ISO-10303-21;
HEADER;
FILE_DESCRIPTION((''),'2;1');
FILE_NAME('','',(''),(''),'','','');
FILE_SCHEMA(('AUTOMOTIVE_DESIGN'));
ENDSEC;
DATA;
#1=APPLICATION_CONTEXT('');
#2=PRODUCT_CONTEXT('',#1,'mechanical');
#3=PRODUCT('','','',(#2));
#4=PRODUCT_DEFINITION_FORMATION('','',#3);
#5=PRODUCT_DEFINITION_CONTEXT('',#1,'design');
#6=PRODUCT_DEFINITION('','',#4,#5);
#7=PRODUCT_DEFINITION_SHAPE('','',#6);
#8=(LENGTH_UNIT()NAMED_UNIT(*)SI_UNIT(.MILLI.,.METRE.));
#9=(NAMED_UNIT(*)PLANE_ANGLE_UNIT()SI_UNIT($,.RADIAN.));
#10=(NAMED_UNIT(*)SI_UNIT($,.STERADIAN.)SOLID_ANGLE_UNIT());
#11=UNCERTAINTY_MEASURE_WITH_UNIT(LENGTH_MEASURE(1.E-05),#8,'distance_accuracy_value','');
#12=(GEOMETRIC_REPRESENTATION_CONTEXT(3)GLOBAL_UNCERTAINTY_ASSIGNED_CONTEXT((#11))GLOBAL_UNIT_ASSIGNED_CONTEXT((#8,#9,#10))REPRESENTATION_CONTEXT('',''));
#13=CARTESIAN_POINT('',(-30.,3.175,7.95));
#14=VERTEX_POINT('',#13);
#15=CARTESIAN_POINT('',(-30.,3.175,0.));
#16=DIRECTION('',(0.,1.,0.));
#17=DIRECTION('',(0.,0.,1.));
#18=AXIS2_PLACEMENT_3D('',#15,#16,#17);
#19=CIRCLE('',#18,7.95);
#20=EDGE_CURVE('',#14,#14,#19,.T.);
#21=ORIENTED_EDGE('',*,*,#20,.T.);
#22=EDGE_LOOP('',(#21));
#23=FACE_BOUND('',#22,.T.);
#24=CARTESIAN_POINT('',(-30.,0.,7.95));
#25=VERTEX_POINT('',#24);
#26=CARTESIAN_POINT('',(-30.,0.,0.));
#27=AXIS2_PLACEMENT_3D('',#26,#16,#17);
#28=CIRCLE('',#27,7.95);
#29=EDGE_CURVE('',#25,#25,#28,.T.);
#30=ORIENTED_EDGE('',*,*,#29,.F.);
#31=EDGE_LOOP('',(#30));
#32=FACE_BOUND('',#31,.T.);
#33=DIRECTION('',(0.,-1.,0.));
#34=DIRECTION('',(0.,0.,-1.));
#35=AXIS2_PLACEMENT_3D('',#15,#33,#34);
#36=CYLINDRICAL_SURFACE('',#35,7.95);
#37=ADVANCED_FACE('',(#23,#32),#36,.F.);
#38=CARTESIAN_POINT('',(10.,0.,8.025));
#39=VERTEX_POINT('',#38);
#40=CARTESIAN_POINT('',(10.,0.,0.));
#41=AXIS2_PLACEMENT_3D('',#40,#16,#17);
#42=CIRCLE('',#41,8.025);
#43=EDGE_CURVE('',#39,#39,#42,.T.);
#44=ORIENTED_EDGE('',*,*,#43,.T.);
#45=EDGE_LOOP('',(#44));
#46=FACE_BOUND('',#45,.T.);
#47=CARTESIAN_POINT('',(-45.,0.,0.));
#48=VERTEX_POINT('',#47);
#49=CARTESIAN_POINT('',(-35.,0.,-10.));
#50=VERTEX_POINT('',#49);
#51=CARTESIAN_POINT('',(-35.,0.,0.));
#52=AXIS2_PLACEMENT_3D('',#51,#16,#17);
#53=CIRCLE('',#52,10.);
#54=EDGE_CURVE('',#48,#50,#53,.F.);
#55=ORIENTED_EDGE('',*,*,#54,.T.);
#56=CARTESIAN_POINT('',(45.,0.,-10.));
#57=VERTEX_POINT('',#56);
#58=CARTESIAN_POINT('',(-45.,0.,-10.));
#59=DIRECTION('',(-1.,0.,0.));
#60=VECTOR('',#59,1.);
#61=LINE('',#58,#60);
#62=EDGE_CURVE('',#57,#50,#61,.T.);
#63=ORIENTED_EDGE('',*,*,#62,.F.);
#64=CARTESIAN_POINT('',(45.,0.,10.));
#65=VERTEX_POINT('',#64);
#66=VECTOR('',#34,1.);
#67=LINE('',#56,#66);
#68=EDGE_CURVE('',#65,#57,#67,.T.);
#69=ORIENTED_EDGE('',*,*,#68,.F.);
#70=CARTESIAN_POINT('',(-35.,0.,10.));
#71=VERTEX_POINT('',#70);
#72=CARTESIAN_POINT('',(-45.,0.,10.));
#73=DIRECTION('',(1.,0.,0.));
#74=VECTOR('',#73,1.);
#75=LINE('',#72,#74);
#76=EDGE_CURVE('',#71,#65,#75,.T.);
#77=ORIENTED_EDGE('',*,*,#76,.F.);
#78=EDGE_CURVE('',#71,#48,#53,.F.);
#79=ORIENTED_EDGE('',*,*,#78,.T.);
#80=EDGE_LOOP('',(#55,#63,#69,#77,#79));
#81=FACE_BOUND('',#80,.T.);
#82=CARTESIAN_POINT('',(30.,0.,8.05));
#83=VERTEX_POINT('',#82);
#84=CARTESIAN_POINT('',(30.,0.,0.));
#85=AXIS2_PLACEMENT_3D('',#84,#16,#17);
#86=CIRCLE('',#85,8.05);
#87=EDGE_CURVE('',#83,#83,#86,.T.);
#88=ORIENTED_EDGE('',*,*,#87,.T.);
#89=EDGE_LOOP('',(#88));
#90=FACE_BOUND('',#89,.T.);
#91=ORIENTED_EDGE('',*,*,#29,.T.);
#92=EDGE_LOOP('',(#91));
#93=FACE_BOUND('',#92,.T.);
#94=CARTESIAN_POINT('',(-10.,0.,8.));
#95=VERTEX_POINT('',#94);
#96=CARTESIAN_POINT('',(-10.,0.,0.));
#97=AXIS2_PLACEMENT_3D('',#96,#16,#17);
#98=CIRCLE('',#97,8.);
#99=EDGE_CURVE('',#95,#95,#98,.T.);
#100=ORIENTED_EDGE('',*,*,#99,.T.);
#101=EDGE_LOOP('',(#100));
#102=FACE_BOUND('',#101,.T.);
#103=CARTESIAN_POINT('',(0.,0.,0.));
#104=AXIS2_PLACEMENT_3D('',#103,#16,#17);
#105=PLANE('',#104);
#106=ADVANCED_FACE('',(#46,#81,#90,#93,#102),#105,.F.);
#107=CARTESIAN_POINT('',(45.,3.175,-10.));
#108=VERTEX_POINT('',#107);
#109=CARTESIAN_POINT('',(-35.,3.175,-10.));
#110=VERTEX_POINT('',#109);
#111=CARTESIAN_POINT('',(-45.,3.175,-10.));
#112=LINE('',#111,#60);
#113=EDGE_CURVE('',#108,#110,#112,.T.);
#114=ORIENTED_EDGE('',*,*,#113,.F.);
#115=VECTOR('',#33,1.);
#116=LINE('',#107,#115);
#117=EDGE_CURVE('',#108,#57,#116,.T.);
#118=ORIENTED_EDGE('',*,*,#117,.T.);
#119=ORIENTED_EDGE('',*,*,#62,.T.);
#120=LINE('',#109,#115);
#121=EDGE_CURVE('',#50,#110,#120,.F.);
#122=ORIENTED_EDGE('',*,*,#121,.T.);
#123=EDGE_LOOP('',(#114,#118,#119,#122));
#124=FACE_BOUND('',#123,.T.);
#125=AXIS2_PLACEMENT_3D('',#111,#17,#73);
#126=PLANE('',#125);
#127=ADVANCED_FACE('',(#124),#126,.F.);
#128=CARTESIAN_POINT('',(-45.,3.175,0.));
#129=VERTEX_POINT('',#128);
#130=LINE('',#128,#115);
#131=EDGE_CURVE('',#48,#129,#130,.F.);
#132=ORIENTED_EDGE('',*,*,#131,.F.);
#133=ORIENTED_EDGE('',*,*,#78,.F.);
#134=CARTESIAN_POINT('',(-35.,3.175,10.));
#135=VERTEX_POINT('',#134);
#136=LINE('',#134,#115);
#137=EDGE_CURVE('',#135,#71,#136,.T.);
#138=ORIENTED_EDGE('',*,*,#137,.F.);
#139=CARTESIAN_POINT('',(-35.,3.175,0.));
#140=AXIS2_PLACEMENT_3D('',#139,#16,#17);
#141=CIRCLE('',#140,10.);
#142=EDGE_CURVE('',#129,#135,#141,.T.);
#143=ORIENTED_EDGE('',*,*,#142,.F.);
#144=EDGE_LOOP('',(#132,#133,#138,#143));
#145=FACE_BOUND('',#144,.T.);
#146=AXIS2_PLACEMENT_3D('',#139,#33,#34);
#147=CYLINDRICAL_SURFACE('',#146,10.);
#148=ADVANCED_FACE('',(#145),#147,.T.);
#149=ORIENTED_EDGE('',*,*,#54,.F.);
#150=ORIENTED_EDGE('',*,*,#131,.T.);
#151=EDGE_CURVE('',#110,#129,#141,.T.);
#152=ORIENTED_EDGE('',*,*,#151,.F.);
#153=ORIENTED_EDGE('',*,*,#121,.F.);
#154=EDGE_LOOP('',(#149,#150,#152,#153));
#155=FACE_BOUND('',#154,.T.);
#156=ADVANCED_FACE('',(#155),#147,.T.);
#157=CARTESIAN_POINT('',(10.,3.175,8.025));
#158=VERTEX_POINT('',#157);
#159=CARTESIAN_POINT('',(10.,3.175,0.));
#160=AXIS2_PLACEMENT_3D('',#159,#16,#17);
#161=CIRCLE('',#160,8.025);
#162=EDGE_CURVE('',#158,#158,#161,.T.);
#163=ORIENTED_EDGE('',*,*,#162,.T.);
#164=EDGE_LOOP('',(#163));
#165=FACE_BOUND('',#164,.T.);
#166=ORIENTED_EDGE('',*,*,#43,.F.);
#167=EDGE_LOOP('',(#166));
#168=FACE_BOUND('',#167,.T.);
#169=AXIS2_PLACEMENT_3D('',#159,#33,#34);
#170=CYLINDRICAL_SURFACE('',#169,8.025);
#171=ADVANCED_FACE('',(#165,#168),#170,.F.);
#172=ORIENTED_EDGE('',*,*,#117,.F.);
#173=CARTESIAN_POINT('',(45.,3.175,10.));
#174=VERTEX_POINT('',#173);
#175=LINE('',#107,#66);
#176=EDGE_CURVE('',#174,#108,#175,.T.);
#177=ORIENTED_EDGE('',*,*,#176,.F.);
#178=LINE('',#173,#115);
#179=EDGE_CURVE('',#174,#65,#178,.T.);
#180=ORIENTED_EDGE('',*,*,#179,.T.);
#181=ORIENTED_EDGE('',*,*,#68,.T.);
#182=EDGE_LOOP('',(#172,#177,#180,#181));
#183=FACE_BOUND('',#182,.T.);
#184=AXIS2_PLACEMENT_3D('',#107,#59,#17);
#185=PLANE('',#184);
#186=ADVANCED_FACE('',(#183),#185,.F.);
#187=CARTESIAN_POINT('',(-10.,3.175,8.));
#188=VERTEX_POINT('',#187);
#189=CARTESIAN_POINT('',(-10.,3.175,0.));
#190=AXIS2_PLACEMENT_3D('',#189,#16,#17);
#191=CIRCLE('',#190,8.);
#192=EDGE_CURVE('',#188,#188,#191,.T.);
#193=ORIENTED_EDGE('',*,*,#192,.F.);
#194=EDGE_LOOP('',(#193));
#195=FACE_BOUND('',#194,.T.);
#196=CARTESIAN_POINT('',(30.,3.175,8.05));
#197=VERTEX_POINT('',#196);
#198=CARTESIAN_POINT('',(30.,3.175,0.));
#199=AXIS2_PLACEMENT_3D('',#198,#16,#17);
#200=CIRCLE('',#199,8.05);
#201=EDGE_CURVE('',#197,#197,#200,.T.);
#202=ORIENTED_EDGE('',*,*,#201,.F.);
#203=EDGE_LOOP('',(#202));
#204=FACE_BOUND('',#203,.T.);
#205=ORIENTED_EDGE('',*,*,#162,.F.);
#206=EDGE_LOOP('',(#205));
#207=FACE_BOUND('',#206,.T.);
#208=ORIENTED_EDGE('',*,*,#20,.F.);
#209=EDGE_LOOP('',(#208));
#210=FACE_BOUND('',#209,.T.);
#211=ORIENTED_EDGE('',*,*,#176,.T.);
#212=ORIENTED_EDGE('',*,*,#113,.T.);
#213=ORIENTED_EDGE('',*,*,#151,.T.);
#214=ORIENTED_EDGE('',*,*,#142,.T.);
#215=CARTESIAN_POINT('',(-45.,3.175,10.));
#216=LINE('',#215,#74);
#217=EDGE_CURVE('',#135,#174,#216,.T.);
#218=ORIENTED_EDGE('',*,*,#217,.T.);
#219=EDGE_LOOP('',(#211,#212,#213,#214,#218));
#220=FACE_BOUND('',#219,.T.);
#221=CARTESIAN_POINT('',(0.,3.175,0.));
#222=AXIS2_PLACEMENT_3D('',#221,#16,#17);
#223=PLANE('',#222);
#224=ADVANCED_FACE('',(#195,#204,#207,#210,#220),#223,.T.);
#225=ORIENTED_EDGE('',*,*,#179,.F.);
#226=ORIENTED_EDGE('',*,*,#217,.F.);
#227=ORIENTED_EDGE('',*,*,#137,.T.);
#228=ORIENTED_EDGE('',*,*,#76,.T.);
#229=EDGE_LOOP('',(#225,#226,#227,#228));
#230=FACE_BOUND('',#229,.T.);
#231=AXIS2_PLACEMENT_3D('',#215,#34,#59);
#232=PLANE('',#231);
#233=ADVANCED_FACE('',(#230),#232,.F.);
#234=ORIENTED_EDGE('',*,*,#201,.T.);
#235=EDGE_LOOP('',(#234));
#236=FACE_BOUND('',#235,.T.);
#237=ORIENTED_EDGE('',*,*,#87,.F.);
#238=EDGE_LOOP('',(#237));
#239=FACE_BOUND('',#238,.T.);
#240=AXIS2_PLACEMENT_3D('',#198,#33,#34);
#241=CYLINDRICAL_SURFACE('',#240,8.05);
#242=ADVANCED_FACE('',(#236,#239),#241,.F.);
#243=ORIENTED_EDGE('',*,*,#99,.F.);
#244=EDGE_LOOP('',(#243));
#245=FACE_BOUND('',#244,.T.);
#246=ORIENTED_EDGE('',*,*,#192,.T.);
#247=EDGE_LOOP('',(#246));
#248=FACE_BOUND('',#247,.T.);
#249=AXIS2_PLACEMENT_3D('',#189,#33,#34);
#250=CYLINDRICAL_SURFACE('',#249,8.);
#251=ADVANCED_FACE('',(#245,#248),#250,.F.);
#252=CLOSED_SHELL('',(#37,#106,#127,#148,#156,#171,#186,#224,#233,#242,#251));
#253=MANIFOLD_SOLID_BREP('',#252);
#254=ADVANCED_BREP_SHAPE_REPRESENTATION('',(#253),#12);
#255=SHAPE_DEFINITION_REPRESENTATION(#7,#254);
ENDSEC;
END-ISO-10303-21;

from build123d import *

# Parameters (mm, degrees)
SKETCH1_W           = 90
SKETCH1_H           = 20
SKETCH1_R           = 7.95
SKETCH1_R_2         = 8
SKETCH1_R_3         = 8.025
SKETCH1_R_4         = 8.05
BOSS_EXTRUDE1_DEPTH = 3.175
FILLET1_R           = 10


with BuildPart() as part:
    # Sketch1 → Boss-Extrude1 (new body)
    with BuildSketch(Plane(origin=(0, 0, 0), x_dir=(1, 0, 0), z_dir=(0, 1, 0))):
        Rectangle(SKETCH1_W, SKETCH1_H)
        with Locations(Location((-30, 0, 0), (0, 0, 270))):
            Circle(SKETCH1_R, mode=Mode.SUBTRACT)
        with Locations(Location((-10, 0, 0), (0, 0, 270))):
            Circle(SKETCH1_R_2, mode=Mode.SUBTRACT)
        with Locations(Location((10, 0, 0), (0, 0, 270))):
            Circle(SKETCH1_R_3, mode=Mode.SUBTRACT)
        with Locations(Location((30, 0, 0), (0, 0, 270))):
            Circle(SKETCH1_R_4, mode=Mode.SUBTRACT)
    extrude(amount=BOSS_EXTRUDE1_DEPTH)

    # Fillet1
    fillet1_edges = [part.edges().sort_by_distance(p)[0] for p in [
        (-45, 1.5875, -10),
        (-45, 1.5875, 10),
    ]]
    fillet(fillet1_edges, radius=FILLET1_R - 0.0001)  # a hair under: the kernel refuses the full size


solid = part.part
